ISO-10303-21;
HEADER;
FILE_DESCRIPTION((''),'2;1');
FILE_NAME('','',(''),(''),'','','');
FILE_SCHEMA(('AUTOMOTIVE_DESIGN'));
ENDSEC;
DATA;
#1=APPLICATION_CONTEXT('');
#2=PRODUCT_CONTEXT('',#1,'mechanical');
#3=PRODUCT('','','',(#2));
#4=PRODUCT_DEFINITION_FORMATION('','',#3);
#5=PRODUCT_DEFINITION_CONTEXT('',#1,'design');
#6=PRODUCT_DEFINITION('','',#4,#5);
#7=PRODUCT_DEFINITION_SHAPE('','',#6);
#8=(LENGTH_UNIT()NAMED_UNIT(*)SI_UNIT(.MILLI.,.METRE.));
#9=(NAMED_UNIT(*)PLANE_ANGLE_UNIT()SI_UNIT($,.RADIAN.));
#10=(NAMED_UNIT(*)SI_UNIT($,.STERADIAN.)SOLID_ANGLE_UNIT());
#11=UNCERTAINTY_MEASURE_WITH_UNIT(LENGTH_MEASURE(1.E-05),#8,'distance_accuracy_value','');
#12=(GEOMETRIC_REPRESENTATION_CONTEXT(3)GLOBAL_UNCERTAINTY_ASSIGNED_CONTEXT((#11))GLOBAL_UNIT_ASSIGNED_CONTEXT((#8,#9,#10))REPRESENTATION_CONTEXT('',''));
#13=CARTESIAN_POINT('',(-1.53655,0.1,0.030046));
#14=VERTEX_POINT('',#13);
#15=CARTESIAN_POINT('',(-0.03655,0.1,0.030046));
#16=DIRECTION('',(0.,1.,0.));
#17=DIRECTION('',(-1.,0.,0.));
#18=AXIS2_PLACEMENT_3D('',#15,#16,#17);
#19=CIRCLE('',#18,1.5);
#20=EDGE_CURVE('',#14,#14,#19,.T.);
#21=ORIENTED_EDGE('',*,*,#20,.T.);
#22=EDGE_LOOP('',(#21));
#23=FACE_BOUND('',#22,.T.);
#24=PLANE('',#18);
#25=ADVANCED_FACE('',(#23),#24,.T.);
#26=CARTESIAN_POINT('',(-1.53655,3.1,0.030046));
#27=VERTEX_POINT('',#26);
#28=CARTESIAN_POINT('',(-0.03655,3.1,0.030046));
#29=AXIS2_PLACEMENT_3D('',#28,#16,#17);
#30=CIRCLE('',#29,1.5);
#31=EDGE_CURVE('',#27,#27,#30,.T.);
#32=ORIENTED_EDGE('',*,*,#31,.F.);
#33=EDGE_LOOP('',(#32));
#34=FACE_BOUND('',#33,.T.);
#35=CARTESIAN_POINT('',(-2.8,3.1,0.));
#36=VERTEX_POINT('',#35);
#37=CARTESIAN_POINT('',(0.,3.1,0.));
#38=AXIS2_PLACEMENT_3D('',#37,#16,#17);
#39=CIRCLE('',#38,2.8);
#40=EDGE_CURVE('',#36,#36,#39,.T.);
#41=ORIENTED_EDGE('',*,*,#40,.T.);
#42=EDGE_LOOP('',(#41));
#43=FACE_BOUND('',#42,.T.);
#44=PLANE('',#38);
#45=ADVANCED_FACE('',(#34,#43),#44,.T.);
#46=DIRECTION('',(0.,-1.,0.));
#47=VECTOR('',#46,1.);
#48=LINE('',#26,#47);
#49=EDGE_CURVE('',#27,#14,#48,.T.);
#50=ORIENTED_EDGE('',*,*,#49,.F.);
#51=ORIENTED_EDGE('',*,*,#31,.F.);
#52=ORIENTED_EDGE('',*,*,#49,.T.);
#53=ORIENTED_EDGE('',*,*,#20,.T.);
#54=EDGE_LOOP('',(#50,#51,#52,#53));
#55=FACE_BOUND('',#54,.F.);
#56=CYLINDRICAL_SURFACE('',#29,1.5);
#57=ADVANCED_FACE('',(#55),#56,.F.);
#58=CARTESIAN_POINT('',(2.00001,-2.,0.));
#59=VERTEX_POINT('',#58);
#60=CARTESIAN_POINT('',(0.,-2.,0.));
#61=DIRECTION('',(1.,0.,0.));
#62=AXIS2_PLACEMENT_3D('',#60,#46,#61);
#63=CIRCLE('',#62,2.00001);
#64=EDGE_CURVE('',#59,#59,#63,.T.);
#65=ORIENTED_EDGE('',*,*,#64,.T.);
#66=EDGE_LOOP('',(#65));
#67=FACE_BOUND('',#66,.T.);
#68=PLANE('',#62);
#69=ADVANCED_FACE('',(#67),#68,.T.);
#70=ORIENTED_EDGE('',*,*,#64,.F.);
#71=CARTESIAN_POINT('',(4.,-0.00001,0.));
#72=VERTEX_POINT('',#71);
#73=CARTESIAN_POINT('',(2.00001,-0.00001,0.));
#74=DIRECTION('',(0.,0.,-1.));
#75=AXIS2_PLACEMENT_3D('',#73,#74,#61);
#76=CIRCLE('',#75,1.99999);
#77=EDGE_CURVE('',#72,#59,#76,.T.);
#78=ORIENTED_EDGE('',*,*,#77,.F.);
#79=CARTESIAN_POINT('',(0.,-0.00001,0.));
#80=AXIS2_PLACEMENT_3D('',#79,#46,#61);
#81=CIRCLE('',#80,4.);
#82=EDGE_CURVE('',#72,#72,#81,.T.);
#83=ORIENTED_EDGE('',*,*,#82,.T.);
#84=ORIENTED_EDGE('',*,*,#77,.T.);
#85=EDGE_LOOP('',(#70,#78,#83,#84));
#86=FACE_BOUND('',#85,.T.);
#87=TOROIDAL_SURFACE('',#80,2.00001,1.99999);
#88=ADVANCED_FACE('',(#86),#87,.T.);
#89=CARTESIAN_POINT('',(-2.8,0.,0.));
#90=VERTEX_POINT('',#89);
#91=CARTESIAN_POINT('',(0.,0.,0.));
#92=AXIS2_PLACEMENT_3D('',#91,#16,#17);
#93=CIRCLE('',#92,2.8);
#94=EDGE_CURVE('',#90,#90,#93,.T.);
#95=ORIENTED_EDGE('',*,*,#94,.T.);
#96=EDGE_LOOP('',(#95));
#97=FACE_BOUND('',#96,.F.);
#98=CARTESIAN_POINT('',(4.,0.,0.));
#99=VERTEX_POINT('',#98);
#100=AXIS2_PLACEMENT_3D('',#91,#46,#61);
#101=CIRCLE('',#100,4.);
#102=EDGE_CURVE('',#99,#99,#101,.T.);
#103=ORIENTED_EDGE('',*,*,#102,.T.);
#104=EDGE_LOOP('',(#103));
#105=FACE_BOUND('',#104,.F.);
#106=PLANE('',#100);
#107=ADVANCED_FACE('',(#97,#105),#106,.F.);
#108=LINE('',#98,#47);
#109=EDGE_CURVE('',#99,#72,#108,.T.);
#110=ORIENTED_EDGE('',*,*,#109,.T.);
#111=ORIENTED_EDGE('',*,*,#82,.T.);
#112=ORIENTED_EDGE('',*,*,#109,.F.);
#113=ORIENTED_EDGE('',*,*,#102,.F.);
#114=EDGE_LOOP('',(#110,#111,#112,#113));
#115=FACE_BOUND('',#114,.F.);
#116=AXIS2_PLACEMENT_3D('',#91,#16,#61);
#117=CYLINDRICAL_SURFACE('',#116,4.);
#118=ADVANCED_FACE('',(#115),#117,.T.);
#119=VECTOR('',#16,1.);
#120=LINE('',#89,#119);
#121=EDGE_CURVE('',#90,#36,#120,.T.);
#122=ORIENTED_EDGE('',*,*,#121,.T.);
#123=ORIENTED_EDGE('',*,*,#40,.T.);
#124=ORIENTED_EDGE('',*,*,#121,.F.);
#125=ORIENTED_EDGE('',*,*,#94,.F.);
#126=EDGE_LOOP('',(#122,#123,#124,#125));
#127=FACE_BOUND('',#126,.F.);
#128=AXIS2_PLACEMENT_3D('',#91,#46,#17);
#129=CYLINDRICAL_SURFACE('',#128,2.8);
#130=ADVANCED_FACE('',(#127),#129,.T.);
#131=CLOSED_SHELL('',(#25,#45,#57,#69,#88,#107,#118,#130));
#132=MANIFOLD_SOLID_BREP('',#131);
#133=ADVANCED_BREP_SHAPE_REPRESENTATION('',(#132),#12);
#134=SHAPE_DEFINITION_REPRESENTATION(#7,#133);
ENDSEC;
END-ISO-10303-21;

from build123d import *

# Parameters (mm, degrees)
F0_R     = 4
F1_DEPTH = 2
F2_R     = 1.99999
F3_R     = 2.8
F4_DEPTH = 3.1
F5_R     = 1.5
F6_DEPTH = 3


# Not quite as in the source:
# - a fillet or chamfer is up to 0.001 mm smaller than in the source, because OpenCascade refuses the exact size


with BuildPart() as f1:
    # F0 (on Front) → F1 (new body)
    with BuildSketch(Plane.XZ):
        Circle(F0_R)
    extrude(amount=F1_DEPTH)

    # F2 (radius 2 in the source; OpenCascade refuses exactly that, so slightly less here)
    f2_edges = [f1.edges().sort_by_distance(p)[0] for p in [
        (-4, -2, 0),
    ]]
    fillet(f2_edges, radius=F2_R)

    # F3 (on face) → F4 (join)
    with BuildSketch(Plane(origin=(0, 0, 0), x_dir=(-1, 0, 0), z_dir=(0, 1, 0))):
        Circle(F3_R)
    extrude(amount=F4_DEPTH)

    # F5 (on face) → F6 (cut)
    with BuildSketch(Plane(origin=(0, 3.1, 0), x_dir=(-1, 0, 0), z_dir=(0, 1, 0))):
        with Locations((0.0365495689, 0.0300457796)):
            Circle(F5_R)
    extrude(amount=-F6_DEPTH, mode=Mode.SUBTRACT)


solid = f1.part
